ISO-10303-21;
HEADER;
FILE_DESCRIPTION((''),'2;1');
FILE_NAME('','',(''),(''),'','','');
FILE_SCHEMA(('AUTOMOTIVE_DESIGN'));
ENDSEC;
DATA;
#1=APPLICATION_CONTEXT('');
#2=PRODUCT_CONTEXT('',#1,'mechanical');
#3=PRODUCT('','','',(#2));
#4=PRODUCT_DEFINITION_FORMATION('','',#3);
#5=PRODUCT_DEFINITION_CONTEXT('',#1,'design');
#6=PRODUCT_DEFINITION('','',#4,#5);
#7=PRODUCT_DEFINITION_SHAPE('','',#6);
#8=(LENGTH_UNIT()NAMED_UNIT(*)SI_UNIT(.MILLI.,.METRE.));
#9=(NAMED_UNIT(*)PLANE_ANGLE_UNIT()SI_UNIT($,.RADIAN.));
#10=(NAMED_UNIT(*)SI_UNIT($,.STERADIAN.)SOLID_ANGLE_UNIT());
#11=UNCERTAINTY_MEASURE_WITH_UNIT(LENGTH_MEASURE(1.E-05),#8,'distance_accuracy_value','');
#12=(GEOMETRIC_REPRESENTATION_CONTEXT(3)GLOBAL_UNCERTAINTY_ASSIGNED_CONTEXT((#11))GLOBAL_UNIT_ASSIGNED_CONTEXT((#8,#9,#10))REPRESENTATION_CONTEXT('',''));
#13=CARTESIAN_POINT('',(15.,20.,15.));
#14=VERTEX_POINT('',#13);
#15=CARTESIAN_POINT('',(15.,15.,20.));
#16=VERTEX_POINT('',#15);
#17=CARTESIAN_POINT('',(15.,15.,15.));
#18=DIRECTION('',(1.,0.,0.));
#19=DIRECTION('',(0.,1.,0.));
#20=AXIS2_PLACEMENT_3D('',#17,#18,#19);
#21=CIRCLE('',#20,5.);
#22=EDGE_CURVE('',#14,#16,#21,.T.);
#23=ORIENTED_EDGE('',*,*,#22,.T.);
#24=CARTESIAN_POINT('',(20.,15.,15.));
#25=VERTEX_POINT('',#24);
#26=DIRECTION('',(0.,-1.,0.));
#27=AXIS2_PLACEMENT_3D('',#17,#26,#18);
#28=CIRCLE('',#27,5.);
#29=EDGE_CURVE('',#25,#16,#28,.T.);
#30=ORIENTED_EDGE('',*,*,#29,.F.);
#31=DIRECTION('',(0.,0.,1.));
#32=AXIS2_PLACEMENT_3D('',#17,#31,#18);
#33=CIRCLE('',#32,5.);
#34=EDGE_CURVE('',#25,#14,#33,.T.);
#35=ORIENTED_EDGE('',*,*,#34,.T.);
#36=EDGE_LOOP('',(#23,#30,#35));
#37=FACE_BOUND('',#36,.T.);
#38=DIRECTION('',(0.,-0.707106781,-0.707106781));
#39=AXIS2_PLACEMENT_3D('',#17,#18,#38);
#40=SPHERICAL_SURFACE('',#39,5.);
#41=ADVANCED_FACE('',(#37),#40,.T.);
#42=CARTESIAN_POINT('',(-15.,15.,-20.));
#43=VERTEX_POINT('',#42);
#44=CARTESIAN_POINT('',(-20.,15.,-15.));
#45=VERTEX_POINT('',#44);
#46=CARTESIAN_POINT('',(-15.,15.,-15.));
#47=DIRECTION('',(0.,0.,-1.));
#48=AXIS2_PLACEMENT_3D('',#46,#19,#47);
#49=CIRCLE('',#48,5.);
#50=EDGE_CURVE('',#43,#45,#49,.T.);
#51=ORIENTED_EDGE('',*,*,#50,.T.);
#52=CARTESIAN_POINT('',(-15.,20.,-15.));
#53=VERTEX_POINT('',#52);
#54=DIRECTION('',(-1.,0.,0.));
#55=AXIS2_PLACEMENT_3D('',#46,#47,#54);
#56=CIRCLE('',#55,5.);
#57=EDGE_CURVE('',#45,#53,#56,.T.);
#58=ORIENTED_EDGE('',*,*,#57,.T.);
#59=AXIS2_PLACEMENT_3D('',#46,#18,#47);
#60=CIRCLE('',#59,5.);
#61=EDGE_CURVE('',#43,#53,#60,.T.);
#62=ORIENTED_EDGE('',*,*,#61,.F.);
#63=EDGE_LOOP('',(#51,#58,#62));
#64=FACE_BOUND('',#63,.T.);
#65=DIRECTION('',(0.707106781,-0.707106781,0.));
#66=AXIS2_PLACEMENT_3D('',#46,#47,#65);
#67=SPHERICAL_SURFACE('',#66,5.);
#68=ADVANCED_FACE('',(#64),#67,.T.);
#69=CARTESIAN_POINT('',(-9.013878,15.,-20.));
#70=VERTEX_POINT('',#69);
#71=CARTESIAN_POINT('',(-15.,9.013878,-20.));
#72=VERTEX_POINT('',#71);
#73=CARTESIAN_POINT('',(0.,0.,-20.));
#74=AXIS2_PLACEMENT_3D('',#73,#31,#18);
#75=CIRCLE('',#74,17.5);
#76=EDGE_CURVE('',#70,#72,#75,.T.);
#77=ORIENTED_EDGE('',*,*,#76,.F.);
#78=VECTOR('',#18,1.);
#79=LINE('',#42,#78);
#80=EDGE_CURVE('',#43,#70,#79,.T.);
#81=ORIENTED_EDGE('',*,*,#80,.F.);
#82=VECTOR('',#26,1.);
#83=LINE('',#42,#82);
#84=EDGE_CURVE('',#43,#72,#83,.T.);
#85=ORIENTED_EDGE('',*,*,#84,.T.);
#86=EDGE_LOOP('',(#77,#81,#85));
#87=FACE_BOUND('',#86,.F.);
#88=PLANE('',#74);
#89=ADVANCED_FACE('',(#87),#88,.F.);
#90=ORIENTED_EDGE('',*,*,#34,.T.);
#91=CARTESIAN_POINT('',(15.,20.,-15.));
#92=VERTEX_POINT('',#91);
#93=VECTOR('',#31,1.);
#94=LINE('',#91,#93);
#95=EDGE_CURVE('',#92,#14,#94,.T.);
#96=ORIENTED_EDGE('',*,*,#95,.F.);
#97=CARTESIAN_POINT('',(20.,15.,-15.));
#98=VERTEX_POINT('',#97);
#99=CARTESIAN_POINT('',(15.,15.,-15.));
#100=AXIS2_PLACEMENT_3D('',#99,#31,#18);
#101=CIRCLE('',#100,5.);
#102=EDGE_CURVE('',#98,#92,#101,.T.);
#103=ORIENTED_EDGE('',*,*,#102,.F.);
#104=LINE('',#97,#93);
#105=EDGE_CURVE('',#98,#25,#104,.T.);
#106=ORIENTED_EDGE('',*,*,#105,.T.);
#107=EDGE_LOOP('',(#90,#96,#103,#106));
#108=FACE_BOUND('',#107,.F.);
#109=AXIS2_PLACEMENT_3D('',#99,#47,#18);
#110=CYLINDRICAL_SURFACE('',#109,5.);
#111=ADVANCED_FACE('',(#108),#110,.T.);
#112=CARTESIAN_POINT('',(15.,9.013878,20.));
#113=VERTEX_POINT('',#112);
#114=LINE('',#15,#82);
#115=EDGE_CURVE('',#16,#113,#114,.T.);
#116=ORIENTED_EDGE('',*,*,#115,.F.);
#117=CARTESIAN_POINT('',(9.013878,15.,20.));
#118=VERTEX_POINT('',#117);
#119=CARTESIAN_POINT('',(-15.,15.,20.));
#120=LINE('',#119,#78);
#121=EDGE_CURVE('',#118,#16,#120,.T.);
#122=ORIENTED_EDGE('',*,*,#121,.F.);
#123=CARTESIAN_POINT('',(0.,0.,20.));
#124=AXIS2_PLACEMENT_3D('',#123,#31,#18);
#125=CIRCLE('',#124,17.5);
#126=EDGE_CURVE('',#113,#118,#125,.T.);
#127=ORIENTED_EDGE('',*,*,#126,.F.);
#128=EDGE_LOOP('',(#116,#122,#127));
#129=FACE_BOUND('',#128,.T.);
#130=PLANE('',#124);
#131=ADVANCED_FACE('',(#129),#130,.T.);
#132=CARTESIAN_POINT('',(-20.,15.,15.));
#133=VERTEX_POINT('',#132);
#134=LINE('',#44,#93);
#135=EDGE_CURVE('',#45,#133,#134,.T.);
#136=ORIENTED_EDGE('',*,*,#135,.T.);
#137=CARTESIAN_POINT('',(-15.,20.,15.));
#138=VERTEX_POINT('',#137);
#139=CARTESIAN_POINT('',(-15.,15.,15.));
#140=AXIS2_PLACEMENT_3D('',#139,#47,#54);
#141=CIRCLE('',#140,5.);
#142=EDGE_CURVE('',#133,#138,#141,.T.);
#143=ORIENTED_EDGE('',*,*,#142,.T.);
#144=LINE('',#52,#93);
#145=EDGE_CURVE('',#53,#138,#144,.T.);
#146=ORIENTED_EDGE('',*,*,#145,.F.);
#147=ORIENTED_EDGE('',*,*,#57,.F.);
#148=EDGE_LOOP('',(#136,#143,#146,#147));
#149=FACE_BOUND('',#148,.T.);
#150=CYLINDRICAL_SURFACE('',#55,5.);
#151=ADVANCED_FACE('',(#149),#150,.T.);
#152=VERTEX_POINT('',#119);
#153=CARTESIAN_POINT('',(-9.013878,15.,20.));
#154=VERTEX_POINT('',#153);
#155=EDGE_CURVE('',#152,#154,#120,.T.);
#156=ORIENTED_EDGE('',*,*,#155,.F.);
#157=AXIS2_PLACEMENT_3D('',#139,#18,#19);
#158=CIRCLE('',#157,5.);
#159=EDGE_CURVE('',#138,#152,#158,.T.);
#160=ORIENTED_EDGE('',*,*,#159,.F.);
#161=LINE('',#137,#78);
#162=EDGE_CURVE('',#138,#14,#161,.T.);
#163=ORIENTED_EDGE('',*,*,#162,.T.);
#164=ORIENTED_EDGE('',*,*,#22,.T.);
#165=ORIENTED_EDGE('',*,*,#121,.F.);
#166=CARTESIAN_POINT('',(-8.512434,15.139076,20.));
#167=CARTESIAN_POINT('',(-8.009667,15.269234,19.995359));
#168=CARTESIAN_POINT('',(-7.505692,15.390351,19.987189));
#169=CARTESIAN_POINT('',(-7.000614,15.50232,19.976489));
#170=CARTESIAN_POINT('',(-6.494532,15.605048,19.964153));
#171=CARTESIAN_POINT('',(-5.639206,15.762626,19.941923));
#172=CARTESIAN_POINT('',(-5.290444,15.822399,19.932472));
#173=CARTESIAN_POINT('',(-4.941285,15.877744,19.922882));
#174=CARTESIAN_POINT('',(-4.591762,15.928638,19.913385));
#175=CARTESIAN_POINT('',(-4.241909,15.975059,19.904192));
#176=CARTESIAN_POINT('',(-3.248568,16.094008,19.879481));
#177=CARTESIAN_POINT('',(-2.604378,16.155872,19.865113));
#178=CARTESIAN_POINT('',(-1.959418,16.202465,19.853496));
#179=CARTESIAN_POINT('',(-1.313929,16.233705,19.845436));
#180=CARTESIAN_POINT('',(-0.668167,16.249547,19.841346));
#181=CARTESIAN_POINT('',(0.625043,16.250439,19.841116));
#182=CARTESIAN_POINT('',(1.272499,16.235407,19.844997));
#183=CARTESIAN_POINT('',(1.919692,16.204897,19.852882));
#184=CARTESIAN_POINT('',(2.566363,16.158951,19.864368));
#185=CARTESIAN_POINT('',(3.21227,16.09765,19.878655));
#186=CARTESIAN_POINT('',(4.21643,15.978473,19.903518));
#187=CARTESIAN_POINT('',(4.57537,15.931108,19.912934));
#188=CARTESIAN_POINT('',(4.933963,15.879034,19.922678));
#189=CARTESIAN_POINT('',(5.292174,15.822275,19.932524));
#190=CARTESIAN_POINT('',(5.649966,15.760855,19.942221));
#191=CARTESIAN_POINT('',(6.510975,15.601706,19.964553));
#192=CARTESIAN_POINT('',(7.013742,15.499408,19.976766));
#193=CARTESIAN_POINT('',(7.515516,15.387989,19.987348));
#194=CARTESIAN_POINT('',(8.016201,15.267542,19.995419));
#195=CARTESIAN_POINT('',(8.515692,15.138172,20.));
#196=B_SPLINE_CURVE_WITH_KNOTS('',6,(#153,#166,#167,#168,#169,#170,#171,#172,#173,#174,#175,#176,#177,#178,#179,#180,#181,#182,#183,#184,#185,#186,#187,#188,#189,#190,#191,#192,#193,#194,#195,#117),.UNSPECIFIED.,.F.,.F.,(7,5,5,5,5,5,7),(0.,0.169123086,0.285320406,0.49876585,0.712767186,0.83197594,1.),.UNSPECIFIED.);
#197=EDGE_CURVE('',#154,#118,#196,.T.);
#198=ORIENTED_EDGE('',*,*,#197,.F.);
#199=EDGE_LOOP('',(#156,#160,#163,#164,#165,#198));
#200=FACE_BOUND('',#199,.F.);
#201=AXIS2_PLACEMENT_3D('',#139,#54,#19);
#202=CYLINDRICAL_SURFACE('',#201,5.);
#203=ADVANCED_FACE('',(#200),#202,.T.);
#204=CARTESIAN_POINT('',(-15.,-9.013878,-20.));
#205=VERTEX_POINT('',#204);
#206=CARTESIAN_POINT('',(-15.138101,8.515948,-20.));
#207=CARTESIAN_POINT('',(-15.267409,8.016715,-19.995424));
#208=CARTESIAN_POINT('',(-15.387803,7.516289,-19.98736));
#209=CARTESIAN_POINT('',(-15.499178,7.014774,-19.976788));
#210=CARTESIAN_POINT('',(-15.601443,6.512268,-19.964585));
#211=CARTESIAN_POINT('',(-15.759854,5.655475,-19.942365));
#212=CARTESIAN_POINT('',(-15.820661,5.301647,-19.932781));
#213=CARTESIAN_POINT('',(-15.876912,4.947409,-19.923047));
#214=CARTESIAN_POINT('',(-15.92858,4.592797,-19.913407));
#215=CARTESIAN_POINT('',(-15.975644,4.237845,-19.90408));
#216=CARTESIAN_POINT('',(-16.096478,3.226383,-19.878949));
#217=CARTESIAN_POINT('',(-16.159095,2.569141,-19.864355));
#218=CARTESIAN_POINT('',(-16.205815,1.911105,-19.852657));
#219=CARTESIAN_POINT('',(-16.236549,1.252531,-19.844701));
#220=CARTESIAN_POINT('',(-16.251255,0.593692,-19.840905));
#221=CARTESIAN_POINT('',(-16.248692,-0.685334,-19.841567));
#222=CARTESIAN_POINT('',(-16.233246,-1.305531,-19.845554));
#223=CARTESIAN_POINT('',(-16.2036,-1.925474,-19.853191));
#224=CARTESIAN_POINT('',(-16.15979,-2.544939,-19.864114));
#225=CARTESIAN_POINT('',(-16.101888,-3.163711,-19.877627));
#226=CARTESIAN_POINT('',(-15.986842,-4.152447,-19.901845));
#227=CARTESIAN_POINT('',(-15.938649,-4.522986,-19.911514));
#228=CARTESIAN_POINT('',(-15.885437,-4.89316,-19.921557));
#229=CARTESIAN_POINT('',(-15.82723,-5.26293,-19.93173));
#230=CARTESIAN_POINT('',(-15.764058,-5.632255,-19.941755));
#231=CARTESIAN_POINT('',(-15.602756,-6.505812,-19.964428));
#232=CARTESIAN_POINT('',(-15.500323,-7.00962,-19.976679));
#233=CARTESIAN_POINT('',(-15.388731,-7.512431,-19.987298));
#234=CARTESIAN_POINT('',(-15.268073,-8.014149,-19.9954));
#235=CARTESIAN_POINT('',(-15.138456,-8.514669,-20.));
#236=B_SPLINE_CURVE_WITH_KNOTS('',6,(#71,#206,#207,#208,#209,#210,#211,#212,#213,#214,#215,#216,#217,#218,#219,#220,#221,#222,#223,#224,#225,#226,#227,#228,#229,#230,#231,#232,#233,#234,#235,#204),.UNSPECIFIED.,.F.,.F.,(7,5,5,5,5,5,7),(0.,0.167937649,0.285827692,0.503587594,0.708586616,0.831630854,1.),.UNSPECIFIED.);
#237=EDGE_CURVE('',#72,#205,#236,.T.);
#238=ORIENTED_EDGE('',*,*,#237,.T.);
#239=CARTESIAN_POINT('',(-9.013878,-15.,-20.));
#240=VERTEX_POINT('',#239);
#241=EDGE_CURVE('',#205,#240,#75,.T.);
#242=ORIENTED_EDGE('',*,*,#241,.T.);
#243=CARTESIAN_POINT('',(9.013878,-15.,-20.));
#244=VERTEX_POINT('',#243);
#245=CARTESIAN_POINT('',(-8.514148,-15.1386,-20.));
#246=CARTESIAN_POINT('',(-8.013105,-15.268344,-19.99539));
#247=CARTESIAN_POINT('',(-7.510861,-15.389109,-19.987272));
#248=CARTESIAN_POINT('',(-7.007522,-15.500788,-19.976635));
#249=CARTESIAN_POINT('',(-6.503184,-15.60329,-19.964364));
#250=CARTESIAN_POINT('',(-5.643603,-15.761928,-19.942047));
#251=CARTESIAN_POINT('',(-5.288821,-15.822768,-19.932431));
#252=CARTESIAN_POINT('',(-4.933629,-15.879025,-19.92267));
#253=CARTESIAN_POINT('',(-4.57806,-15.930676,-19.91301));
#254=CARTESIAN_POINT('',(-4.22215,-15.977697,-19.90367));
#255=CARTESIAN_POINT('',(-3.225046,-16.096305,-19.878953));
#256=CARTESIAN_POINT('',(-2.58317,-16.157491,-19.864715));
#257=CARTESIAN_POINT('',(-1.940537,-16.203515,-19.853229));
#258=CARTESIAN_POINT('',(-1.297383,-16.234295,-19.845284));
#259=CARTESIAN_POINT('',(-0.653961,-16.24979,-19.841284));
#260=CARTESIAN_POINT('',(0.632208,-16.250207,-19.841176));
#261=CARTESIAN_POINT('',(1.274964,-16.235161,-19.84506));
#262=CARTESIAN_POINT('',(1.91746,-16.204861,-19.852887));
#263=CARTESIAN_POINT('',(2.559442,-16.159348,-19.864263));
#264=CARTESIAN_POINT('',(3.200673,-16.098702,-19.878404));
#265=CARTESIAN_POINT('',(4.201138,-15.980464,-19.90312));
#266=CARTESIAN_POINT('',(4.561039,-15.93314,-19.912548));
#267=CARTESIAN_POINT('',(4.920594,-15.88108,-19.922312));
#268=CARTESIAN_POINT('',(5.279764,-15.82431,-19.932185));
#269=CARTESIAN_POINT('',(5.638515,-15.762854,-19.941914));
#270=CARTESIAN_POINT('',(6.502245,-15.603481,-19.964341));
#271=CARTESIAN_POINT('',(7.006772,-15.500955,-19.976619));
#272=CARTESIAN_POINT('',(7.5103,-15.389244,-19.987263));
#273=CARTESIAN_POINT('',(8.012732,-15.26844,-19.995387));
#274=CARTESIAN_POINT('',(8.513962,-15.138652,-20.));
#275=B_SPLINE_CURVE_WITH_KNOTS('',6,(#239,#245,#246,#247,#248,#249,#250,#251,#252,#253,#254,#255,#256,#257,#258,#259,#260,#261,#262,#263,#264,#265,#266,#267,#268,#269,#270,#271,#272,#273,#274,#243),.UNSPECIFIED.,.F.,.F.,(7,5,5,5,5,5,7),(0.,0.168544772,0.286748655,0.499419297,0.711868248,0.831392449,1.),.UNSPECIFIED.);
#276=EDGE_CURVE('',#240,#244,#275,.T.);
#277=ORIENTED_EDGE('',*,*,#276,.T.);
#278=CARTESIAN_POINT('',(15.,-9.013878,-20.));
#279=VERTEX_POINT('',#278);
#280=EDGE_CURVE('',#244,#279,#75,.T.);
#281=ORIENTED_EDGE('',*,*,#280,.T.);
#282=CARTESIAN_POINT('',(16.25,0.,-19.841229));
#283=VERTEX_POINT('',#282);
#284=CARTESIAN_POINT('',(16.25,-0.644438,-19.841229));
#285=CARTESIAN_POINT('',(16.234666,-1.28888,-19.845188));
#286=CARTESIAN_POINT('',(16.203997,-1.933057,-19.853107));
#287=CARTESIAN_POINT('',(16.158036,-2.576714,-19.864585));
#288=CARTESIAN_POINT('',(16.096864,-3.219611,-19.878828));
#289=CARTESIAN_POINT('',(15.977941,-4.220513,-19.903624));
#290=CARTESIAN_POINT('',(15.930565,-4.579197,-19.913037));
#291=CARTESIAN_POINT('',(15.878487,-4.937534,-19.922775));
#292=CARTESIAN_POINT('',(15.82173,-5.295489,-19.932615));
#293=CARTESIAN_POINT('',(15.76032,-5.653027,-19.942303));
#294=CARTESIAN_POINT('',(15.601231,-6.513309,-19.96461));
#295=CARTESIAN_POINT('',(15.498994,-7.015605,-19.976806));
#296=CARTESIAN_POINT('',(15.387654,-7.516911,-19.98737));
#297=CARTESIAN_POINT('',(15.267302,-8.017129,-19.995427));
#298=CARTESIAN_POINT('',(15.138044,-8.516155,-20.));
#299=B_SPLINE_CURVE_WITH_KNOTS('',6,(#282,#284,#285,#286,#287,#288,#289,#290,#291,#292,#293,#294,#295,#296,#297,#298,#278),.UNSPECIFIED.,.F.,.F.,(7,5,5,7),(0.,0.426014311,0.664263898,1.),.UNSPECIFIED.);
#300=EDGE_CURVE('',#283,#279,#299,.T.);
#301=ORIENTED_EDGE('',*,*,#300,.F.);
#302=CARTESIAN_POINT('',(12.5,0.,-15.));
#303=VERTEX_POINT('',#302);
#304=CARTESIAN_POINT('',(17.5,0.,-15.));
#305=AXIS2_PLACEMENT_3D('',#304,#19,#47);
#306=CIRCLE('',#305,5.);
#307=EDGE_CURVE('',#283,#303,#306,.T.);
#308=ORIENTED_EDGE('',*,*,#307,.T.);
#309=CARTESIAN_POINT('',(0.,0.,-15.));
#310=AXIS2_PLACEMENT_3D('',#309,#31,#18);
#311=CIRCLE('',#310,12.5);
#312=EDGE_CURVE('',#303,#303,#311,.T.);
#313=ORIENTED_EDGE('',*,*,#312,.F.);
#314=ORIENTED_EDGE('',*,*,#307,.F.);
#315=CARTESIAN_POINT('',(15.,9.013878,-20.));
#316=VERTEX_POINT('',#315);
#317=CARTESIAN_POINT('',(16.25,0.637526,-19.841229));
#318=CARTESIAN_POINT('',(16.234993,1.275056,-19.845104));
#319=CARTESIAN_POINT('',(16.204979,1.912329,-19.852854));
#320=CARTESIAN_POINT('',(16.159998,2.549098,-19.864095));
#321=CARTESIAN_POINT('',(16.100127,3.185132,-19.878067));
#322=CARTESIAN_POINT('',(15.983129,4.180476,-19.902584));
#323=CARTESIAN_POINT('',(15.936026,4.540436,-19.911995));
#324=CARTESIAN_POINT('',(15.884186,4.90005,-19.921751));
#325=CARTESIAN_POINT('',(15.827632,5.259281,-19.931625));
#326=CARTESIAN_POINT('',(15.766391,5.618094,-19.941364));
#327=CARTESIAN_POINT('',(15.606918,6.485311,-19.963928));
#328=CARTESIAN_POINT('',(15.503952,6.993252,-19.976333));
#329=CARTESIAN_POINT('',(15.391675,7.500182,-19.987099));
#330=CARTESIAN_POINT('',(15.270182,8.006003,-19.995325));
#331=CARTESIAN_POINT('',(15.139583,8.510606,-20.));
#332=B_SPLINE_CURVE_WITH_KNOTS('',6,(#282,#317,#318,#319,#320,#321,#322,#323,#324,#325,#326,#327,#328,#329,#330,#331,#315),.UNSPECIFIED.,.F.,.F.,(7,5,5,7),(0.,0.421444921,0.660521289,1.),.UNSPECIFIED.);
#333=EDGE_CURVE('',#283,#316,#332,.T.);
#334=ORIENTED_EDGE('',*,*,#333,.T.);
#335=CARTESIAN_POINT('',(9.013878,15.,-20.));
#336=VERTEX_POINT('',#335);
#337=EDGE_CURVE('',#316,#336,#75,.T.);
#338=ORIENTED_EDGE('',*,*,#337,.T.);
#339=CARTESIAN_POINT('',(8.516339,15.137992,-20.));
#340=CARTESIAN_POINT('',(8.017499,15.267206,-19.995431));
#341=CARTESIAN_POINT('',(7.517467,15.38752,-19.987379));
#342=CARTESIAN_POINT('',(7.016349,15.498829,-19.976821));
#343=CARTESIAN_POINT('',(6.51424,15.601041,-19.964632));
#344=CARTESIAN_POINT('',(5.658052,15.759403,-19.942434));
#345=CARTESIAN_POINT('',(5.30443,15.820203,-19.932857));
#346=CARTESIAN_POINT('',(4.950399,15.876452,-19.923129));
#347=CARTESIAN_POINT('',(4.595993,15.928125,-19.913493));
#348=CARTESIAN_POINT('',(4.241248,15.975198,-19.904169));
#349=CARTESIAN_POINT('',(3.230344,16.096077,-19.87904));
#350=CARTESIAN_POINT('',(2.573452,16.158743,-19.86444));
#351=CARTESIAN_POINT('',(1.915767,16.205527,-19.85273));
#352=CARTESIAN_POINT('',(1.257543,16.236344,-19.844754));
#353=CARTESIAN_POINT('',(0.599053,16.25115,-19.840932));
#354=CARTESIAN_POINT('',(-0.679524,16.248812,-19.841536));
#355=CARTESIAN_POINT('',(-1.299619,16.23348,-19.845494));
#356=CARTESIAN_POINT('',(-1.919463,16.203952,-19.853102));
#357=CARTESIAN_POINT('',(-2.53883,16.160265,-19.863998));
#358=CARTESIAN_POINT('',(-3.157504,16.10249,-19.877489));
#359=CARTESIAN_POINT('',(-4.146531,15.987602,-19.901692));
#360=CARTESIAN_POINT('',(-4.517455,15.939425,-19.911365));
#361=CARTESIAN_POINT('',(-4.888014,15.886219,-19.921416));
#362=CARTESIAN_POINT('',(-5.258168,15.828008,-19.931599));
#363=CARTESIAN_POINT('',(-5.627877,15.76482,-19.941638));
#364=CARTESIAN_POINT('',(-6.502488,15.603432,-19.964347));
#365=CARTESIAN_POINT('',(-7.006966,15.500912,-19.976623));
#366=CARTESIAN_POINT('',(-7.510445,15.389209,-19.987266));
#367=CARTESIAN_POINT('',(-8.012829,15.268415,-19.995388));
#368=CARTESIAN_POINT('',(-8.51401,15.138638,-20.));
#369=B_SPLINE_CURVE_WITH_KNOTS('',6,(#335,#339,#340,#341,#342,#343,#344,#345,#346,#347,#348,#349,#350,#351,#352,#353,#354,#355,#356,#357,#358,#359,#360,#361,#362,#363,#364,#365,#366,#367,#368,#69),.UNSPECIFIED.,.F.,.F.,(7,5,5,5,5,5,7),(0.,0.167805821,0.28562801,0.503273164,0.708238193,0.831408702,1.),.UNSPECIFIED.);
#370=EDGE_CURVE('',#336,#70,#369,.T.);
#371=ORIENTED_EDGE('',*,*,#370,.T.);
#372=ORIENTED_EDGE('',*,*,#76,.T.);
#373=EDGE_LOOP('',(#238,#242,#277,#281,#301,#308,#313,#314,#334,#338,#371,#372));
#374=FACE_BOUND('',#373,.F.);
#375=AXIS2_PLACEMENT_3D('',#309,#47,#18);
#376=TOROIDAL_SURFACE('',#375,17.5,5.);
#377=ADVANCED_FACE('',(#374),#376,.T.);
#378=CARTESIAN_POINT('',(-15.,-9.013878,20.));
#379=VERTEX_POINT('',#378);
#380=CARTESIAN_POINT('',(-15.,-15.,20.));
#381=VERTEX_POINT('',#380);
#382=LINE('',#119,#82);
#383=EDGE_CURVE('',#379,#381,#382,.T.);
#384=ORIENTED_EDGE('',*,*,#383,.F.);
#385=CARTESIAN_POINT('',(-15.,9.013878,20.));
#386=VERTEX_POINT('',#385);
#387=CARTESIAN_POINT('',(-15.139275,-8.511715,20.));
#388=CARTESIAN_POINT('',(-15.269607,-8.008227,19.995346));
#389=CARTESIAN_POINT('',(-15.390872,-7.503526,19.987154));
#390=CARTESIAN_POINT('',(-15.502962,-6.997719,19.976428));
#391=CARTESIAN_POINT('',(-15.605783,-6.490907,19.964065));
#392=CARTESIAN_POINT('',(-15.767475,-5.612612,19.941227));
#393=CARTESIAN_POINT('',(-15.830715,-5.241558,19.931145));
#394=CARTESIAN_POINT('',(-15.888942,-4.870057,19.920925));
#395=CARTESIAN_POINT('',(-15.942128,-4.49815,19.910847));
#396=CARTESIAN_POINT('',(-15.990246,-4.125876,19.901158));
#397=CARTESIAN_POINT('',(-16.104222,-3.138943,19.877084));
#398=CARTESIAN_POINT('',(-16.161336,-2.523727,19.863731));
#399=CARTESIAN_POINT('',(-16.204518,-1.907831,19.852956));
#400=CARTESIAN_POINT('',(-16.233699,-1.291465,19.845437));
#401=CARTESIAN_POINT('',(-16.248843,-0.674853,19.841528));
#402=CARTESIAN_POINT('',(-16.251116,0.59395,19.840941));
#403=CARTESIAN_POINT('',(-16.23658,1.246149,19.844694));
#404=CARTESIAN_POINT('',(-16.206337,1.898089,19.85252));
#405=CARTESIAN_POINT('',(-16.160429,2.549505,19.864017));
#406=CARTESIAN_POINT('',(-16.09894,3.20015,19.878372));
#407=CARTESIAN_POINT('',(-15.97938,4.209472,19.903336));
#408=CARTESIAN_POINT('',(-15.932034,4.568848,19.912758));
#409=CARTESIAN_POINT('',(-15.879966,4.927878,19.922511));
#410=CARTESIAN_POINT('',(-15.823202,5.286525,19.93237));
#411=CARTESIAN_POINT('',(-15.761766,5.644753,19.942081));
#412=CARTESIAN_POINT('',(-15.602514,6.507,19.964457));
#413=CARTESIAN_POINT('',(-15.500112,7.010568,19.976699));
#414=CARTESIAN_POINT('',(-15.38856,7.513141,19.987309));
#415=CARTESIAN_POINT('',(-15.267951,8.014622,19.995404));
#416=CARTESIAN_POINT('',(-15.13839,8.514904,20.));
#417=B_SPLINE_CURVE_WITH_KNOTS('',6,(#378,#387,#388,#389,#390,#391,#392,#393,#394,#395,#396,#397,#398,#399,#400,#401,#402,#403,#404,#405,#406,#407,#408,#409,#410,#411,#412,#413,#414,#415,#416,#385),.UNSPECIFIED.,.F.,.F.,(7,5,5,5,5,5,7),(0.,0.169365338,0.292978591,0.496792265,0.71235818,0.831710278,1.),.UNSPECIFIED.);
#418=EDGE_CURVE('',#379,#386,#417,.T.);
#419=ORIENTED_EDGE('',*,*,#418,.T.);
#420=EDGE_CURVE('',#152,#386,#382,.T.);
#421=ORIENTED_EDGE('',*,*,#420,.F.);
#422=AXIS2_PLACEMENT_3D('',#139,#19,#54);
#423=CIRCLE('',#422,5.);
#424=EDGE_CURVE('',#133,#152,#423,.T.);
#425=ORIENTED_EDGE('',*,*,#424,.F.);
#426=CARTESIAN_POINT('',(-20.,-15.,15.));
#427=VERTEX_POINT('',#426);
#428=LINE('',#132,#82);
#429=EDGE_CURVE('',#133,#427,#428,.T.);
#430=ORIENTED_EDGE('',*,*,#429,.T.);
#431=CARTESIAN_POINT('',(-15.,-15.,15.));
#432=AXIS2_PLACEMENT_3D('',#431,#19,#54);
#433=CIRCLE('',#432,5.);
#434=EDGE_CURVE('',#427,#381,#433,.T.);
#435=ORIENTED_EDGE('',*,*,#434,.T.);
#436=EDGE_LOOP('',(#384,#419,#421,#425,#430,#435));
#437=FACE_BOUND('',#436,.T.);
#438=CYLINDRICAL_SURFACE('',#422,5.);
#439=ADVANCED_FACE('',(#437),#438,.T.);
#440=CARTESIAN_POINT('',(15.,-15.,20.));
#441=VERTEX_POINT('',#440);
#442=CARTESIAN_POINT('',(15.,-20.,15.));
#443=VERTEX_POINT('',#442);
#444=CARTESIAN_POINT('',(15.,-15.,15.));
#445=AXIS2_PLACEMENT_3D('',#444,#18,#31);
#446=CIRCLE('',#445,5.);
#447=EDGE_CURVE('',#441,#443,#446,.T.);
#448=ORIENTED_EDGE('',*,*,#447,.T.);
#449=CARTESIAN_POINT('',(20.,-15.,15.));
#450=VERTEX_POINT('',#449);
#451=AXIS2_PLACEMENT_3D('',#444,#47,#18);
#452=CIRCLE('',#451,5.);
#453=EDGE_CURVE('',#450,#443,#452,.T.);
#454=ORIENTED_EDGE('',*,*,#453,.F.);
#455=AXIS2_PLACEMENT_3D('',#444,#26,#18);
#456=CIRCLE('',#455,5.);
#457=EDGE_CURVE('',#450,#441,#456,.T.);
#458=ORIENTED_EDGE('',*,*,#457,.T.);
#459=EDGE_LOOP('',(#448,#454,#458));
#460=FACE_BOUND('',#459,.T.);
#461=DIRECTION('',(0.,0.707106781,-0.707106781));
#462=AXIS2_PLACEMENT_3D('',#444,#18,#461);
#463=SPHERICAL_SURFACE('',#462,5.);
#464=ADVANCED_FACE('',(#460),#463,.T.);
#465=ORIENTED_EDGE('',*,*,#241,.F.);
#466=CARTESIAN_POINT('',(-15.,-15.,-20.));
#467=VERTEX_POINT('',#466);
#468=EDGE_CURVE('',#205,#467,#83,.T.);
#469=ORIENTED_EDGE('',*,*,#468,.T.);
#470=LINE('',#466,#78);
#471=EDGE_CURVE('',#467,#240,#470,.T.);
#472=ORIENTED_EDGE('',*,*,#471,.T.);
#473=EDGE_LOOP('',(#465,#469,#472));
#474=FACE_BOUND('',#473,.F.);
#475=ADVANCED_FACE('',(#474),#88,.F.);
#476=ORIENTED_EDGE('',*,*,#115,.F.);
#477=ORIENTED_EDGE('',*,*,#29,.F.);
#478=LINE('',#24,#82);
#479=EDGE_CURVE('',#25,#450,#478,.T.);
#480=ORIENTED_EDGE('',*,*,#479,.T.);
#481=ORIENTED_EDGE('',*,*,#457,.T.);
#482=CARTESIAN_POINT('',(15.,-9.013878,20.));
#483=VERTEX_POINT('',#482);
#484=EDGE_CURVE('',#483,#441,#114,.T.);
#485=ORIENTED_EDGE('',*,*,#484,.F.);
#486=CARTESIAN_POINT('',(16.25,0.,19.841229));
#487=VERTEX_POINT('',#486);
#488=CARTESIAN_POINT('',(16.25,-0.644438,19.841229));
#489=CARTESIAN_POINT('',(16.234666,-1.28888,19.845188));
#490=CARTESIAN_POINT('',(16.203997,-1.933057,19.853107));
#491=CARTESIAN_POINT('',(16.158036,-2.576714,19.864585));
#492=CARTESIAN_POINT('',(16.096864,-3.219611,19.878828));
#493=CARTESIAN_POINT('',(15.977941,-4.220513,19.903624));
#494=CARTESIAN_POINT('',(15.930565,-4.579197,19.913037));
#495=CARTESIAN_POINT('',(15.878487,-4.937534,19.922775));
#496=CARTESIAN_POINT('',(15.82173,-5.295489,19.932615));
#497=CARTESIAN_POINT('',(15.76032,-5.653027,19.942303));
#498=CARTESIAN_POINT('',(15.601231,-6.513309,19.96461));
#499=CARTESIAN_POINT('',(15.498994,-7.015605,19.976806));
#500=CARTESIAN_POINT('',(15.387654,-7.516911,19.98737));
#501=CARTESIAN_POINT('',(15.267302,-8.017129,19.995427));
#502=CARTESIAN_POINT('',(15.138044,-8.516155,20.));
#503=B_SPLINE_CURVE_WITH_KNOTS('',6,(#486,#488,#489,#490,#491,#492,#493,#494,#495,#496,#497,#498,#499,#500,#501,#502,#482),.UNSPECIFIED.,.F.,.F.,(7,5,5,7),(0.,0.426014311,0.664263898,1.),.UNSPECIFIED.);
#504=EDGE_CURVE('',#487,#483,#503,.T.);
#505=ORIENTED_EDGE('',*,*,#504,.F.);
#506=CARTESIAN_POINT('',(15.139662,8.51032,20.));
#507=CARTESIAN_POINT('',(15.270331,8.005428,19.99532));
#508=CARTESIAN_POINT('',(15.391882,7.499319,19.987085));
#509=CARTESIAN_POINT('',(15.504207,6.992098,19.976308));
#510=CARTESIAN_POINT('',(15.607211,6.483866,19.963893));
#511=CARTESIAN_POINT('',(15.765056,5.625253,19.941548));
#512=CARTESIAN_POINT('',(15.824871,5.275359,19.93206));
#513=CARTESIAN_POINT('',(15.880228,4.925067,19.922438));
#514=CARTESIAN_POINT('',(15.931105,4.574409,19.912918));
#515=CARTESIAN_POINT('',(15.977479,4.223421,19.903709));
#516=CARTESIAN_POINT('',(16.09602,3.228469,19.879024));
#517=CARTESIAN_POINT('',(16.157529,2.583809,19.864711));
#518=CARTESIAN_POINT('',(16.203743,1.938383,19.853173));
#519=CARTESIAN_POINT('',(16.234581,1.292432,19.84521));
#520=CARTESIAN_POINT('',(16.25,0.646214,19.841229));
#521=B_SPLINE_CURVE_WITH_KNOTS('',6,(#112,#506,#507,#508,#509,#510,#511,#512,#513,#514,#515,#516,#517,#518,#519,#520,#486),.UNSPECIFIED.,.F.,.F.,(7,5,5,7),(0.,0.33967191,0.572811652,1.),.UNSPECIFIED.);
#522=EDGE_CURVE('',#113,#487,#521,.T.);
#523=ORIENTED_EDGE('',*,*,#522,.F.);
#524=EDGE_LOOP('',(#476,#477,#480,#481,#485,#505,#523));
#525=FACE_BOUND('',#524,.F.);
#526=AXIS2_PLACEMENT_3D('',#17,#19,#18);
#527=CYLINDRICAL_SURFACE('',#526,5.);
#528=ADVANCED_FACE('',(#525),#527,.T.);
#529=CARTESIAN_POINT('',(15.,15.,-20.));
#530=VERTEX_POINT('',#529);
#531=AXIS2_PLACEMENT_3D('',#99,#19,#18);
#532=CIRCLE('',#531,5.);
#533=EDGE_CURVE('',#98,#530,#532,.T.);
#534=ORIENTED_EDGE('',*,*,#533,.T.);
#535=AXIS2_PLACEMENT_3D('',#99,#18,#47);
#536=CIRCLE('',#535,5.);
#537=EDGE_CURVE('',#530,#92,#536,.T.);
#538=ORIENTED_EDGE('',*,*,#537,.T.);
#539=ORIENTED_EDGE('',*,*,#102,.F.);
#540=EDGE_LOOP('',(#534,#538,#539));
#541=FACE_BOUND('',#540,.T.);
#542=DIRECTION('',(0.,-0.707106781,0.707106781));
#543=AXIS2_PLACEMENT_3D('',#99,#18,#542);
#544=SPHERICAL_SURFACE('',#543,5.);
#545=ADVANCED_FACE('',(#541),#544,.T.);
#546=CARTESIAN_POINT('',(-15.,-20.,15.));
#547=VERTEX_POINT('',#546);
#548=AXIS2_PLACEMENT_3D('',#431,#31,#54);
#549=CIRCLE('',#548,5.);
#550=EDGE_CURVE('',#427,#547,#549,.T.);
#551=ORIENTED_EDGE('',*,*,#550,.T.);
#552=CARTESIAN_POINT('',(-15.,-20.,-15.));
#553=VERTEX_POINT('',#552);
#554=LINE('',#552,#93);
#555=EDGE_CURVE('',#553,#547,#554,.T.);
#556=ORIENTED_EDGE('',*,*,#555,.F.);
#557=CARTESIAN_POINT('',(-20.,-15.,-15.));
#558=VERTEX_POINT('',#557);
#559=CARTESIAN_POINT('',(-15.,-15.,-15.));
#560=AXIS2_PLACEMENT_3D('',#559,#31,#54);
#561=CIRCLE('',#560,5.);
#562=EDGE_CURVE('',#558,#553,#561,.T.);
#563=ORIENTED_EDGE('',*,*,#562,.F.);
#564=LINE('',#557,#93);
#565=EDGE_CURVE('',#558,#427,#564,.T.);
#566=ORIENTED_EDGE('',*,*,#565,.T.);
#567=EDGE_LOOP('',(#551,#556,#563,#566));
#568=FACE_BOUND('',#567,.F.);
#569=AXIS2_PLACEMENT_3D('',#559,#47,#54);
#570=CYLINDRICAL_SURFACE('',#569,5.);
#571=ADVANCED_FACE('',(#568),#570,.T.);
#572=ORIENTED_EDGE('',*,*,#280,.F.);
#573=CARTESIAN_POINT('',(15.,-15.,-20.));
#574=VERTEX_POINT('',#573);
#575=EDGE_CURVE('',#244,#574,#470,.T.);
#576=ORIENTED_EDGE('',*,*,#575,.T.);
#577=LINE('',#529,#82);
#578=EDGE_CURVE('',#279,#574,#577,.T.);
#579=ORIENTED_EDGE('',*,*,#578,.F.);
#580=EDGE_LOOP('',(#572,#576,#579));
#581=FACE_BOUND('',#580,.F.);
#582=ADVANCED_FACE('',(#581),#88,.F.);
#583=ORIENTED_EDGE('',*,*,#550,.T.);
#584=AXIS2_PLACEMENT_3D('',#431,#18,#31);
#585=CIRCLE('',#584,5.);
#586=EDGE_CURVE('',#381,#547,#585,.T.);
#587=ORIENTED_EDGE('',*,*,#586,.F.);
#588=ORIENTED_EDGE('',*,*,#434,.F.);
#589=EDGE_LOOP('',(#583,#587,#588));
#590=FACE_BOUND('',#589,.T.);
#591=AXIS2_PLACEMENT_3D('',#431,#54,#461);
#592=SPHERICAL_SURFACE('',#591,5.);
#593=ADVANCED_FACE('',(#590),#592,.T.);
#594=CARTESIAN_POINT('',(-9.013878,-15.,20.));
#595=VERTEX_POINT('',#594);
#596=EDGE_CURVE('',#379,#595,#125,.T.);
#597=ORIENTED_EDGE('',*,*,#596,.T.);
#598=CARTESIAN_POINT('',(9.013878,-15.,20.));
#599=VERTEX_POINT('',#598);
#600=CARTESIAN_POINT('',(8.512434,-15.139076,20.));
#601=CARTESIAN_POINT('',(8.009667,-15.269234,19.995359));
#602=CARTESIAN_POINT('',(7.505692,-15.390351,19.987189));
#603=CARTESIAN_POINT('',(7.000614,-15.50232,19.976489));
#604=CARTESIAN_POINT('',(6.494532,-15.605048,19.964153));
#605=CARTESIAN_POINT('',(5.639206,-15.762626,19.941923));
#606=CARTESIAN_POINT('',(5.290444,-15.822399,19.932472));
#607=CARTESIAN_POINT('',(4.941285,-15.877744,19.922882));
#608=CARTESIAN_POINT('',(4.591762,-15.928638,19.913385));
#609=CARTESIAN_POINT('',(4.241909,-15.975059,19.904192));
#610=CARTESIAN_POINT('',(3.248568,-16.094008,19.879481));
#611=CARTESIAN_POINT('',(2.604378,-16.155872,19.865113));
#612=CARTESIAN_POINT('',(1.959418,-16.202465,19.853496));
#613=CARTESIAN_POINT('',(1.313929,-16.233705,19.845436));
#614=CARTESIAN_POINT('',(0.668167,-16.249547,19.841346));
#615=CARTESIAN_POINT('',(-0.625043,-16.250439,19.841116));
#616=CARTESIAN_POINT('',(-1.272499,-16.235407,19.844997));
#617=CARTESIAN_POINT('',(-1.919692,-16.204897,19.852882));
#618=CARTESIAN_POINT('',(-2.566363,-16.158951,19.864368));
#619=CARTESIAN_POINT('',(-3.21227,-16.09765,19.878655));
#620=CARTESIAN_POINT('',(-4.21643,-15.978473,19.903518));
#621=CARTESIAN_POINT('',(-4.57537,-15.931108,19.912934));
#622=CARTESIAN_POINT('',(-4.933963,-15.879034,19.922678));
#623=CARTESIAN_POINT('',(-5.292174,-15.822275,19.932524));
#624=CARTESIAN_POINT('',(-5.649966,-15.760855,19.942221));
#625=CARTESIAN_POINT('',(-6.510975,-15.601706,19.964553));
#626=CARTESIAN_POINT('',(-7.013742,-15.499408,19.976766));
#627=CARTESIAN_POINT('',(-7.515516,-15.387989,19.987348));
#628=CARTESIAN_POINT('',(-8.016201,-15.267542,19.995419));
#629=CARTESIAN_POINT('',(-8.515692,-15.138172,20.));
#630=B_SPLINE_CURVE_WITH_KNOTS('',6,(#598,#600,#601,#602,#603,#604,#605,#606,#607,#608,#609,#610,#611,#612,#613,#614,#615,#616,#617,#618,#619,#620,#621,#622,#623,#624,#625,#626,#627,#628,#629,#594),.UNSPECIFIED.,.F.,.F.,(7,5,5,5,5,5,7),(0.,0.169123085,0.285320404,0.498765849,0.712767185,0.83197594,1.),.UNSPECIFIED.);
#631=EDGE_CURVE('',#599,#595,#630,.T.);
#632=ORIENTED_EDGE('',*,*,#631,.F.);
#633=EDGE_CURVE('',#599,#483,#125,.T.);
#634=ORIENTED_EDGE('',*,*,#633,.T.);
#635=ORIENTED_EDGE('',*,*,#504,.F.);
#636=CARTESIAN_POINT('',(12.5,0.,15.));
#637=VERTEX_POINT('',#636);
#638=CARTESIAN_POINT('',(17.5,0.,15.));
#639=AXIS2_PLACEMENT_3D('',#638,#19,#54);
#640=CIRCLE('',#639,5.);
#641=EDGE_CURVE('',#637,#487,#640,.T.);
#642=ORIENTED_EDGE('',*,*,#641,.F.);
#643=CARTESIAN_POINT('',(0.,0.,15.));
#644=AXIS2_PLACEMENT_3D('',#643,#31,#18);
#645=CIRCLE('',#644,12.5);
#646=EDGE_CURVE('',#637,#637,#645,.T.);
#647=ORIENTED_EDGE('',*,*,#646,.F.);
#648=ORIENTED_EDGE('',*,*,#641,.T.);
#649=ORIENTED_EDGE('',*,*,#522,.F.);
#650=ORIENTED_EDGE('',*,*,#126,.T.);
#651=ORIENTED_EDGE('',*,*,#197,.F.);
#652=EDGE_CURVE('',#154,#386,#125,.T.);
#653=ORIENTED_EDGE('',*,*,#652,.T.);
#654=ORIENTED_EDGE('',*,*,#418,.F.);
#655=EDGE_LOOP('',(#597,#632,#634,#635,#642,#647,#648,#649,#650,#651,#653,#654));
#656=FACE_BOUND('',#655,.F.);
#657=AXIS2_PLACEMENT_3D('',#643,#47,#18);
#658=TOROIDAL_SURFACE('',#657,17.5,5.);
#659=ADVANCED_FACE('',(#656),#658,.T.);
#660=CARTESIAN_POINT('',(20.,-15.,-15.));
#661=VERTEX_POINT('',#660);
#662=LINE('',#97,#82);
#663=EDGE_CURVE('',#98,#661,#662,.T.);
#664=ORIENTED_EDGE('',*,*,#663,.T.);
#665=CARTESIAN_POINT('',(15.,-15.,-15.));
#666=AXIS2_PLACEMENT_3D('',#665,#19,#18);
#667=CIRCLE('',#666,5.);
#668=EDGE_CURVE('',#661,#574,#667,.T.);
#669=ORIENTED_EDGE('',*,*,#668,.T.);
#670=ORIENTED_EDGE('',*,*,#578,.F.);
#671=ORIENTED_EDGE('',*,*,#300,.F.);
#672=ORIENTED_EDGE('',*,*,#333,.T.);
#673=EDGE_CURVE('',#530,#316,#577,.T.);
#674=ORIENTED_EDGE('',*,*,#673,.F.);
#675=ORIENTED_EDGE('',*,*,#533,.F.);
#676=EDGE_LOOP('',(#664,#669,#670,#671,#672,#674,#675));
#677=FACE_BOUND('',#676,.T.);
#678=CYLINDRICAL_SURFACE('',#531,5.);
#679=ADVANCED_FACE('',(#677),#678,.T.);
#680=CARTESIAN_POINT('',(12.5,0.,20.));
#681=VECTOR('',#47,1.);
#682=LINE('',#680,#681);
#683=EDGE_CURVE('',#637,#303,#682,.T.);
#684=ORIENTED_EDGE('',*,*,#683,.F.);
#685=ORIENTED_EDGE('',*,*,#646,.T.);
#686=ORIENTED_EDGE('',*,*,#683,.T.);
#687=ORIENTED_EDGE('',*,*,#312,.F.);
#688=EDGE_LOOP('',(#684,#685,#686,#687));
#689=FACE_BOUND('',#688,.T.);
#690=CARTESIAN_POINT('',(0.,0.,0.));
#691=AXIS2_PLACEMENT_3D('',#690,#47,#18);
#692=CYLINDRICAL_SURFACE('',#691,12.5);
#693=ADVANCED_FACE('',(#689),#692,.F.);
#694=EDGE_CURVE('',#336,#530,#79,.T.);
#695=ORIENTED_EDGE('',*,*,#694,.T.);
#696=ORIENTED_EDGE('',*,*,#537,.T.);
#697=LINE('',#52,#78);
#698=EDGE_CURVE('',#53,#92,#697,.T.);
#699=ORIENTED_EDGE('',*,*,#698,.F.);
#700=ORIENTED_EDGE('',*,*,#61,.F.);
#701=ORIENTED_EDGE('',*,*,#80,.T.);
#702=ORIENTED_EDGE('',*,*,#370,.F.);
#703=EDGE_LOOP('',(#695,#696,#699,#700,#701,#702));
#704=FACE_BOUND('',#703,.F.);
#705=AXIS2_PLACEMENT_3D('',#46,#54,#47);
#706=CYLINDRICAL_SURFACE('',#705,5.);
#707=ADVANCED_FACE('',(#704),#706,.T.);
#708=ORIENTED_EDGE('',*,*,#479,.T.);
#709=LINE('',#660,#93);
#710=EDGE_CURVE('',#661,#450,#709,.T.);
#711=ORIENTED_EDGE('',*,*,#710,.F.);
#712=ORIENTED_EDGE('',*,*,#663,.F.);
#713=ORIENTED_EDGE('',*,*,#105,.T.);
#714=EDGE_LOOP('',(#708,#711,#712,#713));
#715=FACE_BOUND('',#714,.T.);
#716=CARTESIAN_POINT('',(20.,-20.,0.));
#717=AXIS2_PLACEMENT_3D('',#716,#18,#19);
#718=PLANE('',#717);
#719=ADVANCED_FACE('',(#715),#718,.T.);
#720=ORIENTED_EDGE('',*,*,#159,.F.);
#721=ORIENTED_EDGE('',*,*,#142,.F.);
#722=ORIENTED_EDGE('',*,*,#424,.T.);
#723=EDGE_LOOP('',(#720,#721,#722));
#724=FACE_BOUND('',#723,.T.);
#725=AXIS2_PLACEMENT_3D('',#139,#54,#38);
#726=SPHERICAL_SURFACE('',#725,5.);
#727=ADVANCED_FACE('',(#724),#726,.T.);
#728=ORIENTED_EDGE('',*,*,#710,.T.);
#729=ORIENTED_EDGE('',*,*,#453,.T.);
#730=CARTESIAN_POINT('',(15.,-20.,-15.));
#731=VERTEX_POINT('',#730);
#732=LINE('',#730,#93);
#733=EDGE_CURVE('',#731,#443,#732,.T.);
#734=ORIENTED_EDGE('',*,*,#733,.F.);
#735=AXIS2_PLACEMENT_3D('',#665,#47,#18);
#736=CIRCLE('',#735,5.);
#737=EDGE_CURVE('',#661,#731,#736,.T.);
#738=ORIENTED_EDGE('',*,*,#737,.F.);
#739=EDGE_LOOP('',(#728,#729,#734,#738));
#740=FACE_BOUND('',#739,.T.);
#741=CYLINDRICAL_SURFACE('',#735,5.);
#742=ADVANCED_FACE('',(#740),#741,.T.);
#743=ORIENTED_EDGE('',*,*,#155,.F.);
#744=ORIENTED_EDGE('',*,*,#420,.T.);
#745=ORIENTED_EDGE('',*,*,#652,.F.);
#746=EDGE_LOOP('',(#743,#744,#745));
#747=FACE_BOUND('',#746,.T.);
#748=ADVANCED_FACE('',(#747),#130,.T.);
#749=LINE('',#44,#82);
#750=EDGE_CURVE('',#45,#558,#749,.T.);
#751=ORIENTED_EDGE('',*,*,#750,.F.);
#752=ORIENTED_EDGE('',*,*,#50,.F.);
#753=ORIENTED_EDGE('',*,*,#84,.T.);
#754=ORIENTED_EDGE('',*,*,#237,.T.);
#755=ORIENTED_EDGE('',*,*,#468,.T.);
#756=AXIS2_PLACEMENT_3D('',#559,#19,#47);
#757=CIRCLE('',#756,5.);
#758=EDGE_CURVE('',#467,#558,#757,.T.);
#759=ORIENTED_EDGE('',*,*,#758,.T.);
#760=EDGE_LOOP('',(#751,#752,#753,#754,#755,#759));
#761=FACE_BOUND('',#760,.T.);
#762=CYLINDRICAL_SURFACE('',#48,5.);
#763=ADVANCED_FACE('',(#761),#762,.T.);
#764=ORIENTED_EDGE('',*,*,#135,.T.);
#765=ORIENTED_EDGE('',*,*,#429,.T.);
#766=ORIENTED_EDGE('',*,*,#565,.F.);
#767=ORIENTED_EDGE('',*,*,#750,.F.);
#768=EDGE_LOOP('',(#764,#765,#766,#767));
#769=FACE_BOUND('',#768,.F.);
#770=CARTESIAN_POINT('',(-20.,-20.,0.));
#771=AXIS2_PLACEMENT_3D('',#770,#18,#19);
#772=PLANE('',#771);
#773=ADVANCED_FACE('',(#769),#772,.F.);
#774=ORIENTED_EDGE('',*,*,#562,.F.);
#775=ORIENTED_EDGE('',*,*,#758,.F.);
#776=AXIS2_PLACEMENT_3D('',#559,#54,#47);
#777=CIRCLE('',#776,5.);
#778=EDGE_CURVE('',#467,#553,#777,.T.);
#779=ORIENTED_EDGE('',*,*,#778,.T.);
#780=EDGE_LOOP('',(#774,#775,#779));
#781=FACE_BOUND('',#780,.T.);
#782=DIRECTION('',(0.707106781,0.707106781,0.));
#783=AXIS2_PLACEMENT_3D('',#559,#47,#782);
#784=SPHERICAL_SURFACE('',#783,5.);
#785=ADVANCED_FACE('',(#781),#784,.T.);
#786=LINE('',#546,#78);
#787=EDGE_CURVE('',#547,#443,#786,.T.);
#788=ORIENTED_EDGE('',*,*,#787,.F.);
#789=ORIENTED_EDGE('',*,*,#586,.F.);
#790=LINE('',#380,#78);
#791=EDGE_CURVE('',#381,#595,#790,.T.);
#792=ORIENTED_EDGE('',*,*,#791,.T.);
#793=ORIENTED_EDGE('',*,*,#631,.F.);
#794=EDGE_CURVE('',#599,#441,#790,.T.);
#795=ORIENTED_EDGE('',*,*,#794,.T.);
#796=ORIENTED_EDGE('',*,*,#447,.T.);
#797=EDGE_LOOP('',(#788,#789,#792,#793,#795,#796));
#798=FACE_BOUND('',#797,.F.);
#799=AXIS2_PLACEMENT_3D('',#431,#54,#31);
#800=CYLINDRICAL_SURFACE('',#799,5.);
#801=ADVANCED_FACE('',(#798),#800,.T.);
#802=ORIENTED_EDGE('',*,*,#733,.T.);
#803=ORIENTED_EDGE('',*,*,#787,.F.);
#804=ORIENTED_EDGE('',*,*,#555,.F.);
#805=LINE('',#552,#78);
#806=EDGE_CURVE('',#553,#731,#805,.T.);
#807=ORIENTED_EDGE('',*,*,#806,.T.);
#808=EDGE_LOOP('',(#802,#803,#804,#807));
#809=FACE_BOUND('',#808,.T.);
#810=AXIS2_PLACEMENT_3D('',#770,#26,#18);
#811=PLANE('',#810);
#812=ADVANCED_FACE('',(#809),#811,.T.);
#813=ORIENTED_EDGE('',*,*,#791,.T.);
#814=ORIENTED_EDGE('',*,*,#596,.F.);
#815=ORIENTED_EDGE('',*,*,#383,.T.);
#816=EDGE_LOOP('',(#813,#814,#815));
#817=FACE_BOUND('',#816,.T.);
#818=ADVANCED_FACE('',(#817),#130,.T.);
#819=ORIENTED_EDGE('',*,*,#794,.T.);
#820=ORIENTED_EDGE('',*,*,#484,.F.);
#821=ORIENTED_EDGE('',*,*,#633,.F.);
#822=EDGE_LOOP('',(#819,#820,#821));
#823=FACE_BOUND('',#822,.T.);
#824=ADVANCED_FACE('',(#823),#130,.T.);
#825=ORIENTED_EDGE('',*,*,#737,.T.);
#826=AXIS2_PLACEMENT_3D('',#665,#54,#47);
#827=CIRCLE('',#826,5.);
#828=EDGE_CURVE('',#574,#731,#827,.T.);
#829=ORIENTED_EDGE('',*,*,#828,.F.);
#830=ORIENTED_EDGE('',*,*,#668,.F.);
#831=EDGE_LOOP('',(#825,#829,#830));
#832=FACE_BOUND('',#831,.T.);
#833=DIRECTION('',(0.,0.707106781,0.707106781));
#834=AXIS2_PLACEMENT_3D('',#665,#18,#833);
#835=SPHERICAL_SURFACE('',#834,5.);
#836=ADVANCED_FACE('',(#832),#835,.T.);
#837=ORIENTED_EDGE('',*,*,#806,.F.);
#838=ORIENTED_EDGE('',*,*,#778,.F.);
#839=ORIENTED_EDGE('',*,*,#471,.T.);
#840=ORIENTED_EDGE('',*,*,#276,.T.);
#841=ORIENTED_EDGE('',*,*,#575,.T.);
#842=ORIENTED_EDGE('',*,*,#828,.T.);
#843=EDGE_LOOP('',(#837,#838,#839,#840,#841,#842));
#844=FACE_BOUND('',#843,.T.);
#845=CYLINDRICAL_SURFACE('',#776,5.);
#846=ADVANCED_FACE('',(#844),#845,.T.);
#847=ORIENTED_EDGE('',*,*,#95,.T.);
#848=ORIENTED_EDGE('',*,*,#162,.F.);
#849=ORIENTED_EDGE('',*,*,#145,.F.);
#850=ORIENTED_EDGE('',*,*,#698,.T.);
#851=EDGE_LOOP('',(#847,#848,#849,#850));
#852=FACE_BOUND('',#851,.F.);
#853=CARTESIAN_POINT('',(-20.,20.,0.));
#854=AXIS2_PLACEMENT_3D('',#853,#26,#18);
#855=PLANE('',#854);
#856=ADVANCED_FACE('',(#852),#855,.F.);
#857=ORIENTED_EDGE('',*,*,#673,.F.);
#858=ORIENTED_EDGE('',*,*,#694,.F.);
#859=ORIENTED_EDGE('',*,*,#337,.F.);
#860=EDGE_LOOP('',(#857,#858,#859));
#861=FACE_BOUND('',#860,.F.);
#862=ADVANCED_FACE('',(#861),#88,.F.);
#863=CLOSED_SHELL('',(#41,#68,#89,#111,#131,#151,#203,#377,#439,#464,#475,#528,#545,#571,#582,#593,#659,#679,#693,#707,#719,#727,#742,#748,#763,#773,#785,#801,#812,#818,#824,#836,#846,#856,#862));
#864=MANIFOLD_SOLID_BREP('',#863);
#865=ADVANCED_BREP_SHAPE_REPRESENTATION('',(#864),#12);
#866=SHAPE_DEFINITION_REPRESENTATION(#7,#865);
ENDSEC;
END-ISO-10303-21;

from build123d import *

# Parameters (mm, degrees)
F0_W          = 40
F0_H          = 40
F0_R          = 12.5
F1_DEPTH      = 20
F1_DEPTH_BACK = 20
F2_T1_DEPTH   = 30
F2_T3_DEPTH   = 30
F2_T5_DEPTH   = 30
F2_S9_W       = 5
F2_S9_H       = 5
F2_T10_DEPTH  = 5
F2_S15_W      = 5
F2_S15_H      = 5
F2_T16_DEPTH  = 5
F2_S21_W      = 5
F2_S21_H      = 5
F2_T22_DEPTH  = 5
F2_S27_W      = 5
F2_S27_H      = 5
F2_T28_DEPTH  = 5
F2_S33_W      = 5
F2_S33_H      = 5
F2_T34_DEPTH  = 5
F2_S39_W      = 5
F2_S39_H      = 5
F2_T40_DEPTH  = 5
F2_S45_W      = 5
F2_S45_H      = 5
F2_T46_DEPTH  = 5
F2_S51_W      = 5
F2_S51_H      = 5
F2_T52_DEPTH  = 5


# Not quite as in the source:
# - a fillet or chamfer that OpenCascade refuses, or shapes differently, is made with other operations: its cross-section is extruded or revolved along the edge and cut away or added


with BuildPart() as f1:
    # F0 (on Top) → F1 (new body, two sides)
    with BuildSketch(Plane.XY) as f1_sk:
        Rectangle(F0_W, F0_H)
        Circle(F0_R, mode=Mode.SUBTRACT)
    extrude(amount=F1_DEPTH)
    extrude(f1_sk.sketch, amount=-F1_DEPTH_BACK)

    # F2: fillet of radius 5 on 14 edges, made by hand

    # F2_s2 → F2_t1 (cut)
    with BuildSketch(Plane.XZ.offset(-15)):
        with BuildLine():
            ThreePointArc((20, 15), (18.5355339059, 18.5355339059), (15, 20))
            Line((15, 20), (20, 20))
            Line((20, 20), (20, 15))
        make_face()
        with BuildLine():
            ThreePointArc((-20, 15), (-18.5355339059, 18.5355339059), (-15, 20))
            Line((-15, 20), (-20, 20))
            Line((-20, 20), (-20, 15))
        make_face()
        with BuildLine():
            ThreePointArc((20, -15), (18.5355339059, -18.5355339059), (15, -20))
            Line((15, -20), (20, -20))
            Line((20, -20), (20, -15))
        make_face()
        with BuildLine():
            ThreePointArc((-15, -20), (-18.5355339059, -18.5355339059), (-20, -15))
            Line((-20, -15), (-20, -20))
            Line((-20, -20), (-15, -20))
        make_face()
    extrude(amount=F2_T1_DEPTH, mode=Mode.SUBTRACT)

    # F2_s4 → F2_t3 (cut)
    with BuildSketch(Plane.YZ.offset(-15)):
        with BuildLine():
            ThreePointArc((20, 15), (18.5355339059, 18.5355339059), (15, 20))
            Line((15, 20), (20, 20))
            Line((20, 20), (20, 15))
        make_face()
        with BuildLine():
            ThreePointArc((-15, 20), (-18.5355339059, 18.5355339059), (-20, 15))
            Line((-20, 15), (-20, 20))
            Line((-20, 20), (-15, 20))
        make_face()
        with BuildLine():
            ThreePointArc((15, -20), (18.5355339059, -18.5355339059), (20, -15))
            Line((20, -15), (20, -20))
            Line((20, -20), (15, -20))
        make_face()
        with BuildLine():
            ThreePointArc((-15, -20), (-18.5355339059, -18.5355339059), (-20, -15))
            Line((-20, -15), (-20, -20))
            Line((-20, -20), (-15, -20))
        make_face()
    extrude(amount=F2_T3_DEPTH, mode=Mode.SUBTRACT)

    # F2_s6 → F2_t5 (cut)
    with BuildSketch(Plane.XY.offset(-15)):
        with BuildLine():
            ThreePointArc((-20, 15), (-18.5355339059, 18.5355339059), (-15, 20))
            Line((-15, 20), (-20, 20))
            Line((-20, 20), (-20, 15))
        make_face()
        with BuildLine():
            ThreePointArc((20, 15), (18.5355339059, 18.5355339059), (15, 20))
            Line((15, 20), (20, 20))
            Line((20, 20), (20, 15))
        make_face()
        with BuildLine():
            ThreePointArc((-20, -15), (-18.5355339059, -18.5355339059), (-15, -20))
            Line((-15, -20), (-20, -20))
            Line((-20, -20), (-20, -15))
        make_face()
        with BuildLine():
            ThreePointArc((20, -15), (18.5355339059, -18.5355339059), (15, -20))
            Line((15, -20), (20, -20))
            Line((20, -20), (20, -15))
        make_face()
    extrude(amount=F2_T5_DEPTH, mode=Mode.SUBTRACT)


with BuildPart() as f2_tool8:
    # F2_s9 → F2_t10 (new body)
    with BuildSketch(Plane.YZ.offset(15)):
        with Locations((-17.5, 17.5)):
            Rectangle(F2_S9_W, F2_S9_H)
    extrude(amount=F2_T10_DEPTH)

    # F2_s11 → F2_t12 (revolve, cut)
    with BuildSketch(Plane(origin=(15, -15, 15), x_dir=(0, 0.7071067812, -0.7071067812), z_dir=(0, -0.7071067812, -0.7071067812))):
        with BuildLine():
            ThreePointArc((0, -5), (5, 0), (0, 5))
            Line((0, 5), (0, -5))
        make_face()
    revolve(axis=Axis((15, -15, 15), (1, 0, 0)), mode=Mode.SUBTRACT)


with BuildPart() as f1_1:
    add(f1.part)

    # F2_t7: cut F2_tool8
    add(f2_tool8.part, mode=Mode.SUBTRACT)


with BuildPart() as f2_tool14:
    # F2_s15 → F2_t16 (new body)
    with BuildSketch(Plane.YZ.offset(15)):
        with Locations((17.5, 17.5)):
            Rectangle(F2_S15_W, F2_S15_H)
    extrude(amount=F2_T16_DEPTH)

    # F2_s17 → F2_t18 (revolve, cut)
    with BuildSketch(Plane(origin=(15, 15, 15), x_dir=(0, -0.7071067812, -0.7071067812), z_dir=(0, -0.7071067812, 0.7071067812))):
        with BuildLine():
            ThreePointArc((0, -5), (5, 0), (0, 5))
            Line((0, 5), (0, -5))
        make_face()
    revolve(axis=Axis((15, 15, 15), (1, 0, 0)), mode=Mode.SUBTRACT)


with BuildPart() as f1_2:
    add(f1_1.part)

    # F2_t13: cut F2_tool14
    add(f2_tool14.part, mode=Mode.SUBTRACT)


with BuildPart() as f2_tool20:
    # F2_s21 → F2_t22 (new body)
    with BuildSketch(Plane.YZ.offset(-15)):
        with Locations((17.5, 17.5)):
            Rectangle(F2_S21_W, F2_S21_H)
    extrude(amount=-F2_T22_DEPTH)

    # F2_s23 → F2_t24 (revolve, cut)
    with BuildSketch(Plane(origin=(-15, 15, 15), x_dir=(0, -0.7071067812, -0.7071067812), z_dir=(0, 0.7071067812, -0.7071067812))):
        with BuildLine():
            ThreePointArc((0, -5), (5, 0), (0, 5))
            Line((0, 5), (0, -5))
        make_face()
    revolve(axis=Axis((-15, 15, 15), (-1, 0, 0)), mode=Mode.SUBTRACT)


with BuildPart() as f1_3:
    add(f1_2.part)

    # F2_t19: cut F2_tool20
    add(f2_tool20.part, mode=Mode.SUBTRACT)


with BuildPart() as f2_tool26:
    # F2_s27 → F2_t28 (new body)
    with BuildSketch(Plane.YZ.offset(-15)):
        with Locations((-17.5, 17.5)):
            Rectangle(F2_S27_W, F2_S27_H)
    extrude(amount=-F2_T28_DEPTH)

    # F2_s29 → F2_t30 (revolve, cut)
    with BuildSketch(Plane(origin=(-15, -15, 15), x_dir=(0, 0.7071067812, -0.7071067812), z_dir=(0, 0.7071067812, 0.7071067812))):
        with BuildLine():
            ThreePointArc((0, -5), (5, 0), (0, 5))
            Line((0, 5), (0, -5))
        make_face()
    revolve(axis=Axis((-15, -15, 15), (-1, 0, 0)), mode=Mode.SUBTRACT)


with BuildPart() as f1_4:
    add(f1_3.part)

    # F2_t25: cut F2_tool26
    add(f2_tool26.part, mode=Mode.SUBTRACT)


with BuildPart() as f2_tool32:
    # F2_s33 → F2_t34 (new body)
    with BuildSketch(Plane.XY.offset(-15)):
        with Locations((-17.5, 17.5)):
            Rectangle(F2_S33_W, F2_S33_H)
    extrude(amount=-F2_T34_DEPTH)

    # F2_s35 → F2_t36 (revolve, cut)
    with BuildSketch(Plane(origin=(-15, 15, -15), x_dir=(0.7071067812, -0.7071067812, 0), z_dir=(0.7071067812, 0.7071067812, 0))):
        with BuildLine():
            ThreePointArc((0, -5), (5, 0), (0, 5))
            Line((0, 5), (0, -5))
        make_face()
    revolve(axis=Axis((-15, 15, -15), (0, 0, -1)), mode=Mode.SUBTRACT)


with BuildPart() as f1_5:
    add(f1_4.part)

    # F2_t31: cut F2_tool32
    add(f2_tool32.part, mode=Mode.SUBTRACT)


with BuildPart() as f2_tool38:
    # F2_s39 → F2_t40 (new body)
    with BuildSketch(Plane.YZ.offset(15)):
        with Locations((17.5, -17.5)):
            Rectangle(F2_S39_W, F2_S39_H)
    extrude(amount=F2_T40_DEPTH)

    # F2_s41 → F2_t42 (revolve, cut)
    with BuildSketch(Plane(origin=(15, 15, -15), x_dir=(0, -0.7071067812, 0.7071067812), z_dir=(0, 0.7071067812, 0.7071067812))):
        with BuildLine():
            ThreePointArc((0, -5), (5, 0), (0, 5))
            Line((0, 5), (0, -5))
        make_face()
    revolve(axis=Axis((15, 15, -15), (1, 0, 0)), mode=Mode.SUBTRACT)


with BuildPart() as f1_6:
    add(f1_5.part)

    # F2_t37: cut F2_tool38
    add(f2_tool38.part, mode=Mode.SUBTRACT)


with BuildPart() as f2_tool44:
    # F2_s45 → F2_t46 (new body)
    with BuildSketch(Plane.YZ.offset(15)):
        with Locations((-17.5, -17.5)):
            Rectangle(F2_S45_W, F2_S45_H)
    extrude(amount=F2_T46_DEPTH)

    # F2_s47 → F2_t48 (revolve, cut)
    with BuildSketch(Plane(origin=(15, -15, -15), x_dir=(0, 0.7071067812, 0.7071067812), z_dir=(0, 0.7071067812, -0.7071067812))):
        with BuildLine():
            ThreePointArc((0, -5), (5, 0), (0, 5))
            Line((0, 5), (0, -5))
        make_face()
    revolve(axis=Axis((15, -15, -15), (1, 0, 0)), mode=Mode.SUBTRACT)


with BuildPart() as f1_7:
    add(f1_6.part)

    # F2_t43: cut F2_tool44
    add(f2_tool44.part, mode=Mode.SUBTRACT)


with BuildPart() as f2_tool50:
    # F2_s51 → F2_t52 (new body)
    with BuildSketch(Plane.XY.offset(-15)):
        with Locations((-17.5, -17.5)):
            Rectangle(F2_S51_W, F2_S51_H)
    extrude(amount=-F2_T52_DEPTH)

    # F2_s53 → F2_t54 (revolve, cut)
    with BuildSketch(Plane(origin=(-15, -15, -15), x_dir=(0.7071067812, 0.7071067812, 0), z_dir=(-0.7071067812, 0.7071067812, 0))):
        with BuildLine():
            ThreePointArc((0, -5), (5, 0), (0, 5))
            Line((0, 5), (0, -5))
        make_face()
    revolve(axis=Axis((-15, -15, -15), (0, 0, -1)), mode=Mode.SUBTRACT)


with BuildPart() as f1_8:
    add(f1_7.part)

    # F2_t49: cut F2_tool50
    add(f2_tool50.part, mode=Mode.SUBTRACT)

    # F2_s55 → F2_t56 (revolve, cut)
    with BuildSketch(Plane.XZ):
        with BuildLine():
            ThreePointArc((12.5, 15), (13.9644660941, 18.5355339059), (17.5, 20))
            Line((17.5, 20), (12.5, 20))
            Line((12.5, 20), (12.5, 15))
        make_face()
    revolve(axis=Axis((0, 0, 20), (0, 0, 1)), mode=Mode.SUBTRACT)

    # F2_s57 → F2_t58 (revolve, cut)
    with BuildSketch(Plane.XZ):
        with BuildLine():
            ThreePointArc((17.5, -20), (13.9644660941, -18.5355339059), (12.5, -15))
            Line((12.5, -15), (12.5, -20))
            Line((12.5, -20), (17.5, -20))
        make_face()
    revolve(axis=Axis((0, 0, -20), (0, 0, 1)), mode=Mode.SUBTRACT)


solid = f1_8.part
